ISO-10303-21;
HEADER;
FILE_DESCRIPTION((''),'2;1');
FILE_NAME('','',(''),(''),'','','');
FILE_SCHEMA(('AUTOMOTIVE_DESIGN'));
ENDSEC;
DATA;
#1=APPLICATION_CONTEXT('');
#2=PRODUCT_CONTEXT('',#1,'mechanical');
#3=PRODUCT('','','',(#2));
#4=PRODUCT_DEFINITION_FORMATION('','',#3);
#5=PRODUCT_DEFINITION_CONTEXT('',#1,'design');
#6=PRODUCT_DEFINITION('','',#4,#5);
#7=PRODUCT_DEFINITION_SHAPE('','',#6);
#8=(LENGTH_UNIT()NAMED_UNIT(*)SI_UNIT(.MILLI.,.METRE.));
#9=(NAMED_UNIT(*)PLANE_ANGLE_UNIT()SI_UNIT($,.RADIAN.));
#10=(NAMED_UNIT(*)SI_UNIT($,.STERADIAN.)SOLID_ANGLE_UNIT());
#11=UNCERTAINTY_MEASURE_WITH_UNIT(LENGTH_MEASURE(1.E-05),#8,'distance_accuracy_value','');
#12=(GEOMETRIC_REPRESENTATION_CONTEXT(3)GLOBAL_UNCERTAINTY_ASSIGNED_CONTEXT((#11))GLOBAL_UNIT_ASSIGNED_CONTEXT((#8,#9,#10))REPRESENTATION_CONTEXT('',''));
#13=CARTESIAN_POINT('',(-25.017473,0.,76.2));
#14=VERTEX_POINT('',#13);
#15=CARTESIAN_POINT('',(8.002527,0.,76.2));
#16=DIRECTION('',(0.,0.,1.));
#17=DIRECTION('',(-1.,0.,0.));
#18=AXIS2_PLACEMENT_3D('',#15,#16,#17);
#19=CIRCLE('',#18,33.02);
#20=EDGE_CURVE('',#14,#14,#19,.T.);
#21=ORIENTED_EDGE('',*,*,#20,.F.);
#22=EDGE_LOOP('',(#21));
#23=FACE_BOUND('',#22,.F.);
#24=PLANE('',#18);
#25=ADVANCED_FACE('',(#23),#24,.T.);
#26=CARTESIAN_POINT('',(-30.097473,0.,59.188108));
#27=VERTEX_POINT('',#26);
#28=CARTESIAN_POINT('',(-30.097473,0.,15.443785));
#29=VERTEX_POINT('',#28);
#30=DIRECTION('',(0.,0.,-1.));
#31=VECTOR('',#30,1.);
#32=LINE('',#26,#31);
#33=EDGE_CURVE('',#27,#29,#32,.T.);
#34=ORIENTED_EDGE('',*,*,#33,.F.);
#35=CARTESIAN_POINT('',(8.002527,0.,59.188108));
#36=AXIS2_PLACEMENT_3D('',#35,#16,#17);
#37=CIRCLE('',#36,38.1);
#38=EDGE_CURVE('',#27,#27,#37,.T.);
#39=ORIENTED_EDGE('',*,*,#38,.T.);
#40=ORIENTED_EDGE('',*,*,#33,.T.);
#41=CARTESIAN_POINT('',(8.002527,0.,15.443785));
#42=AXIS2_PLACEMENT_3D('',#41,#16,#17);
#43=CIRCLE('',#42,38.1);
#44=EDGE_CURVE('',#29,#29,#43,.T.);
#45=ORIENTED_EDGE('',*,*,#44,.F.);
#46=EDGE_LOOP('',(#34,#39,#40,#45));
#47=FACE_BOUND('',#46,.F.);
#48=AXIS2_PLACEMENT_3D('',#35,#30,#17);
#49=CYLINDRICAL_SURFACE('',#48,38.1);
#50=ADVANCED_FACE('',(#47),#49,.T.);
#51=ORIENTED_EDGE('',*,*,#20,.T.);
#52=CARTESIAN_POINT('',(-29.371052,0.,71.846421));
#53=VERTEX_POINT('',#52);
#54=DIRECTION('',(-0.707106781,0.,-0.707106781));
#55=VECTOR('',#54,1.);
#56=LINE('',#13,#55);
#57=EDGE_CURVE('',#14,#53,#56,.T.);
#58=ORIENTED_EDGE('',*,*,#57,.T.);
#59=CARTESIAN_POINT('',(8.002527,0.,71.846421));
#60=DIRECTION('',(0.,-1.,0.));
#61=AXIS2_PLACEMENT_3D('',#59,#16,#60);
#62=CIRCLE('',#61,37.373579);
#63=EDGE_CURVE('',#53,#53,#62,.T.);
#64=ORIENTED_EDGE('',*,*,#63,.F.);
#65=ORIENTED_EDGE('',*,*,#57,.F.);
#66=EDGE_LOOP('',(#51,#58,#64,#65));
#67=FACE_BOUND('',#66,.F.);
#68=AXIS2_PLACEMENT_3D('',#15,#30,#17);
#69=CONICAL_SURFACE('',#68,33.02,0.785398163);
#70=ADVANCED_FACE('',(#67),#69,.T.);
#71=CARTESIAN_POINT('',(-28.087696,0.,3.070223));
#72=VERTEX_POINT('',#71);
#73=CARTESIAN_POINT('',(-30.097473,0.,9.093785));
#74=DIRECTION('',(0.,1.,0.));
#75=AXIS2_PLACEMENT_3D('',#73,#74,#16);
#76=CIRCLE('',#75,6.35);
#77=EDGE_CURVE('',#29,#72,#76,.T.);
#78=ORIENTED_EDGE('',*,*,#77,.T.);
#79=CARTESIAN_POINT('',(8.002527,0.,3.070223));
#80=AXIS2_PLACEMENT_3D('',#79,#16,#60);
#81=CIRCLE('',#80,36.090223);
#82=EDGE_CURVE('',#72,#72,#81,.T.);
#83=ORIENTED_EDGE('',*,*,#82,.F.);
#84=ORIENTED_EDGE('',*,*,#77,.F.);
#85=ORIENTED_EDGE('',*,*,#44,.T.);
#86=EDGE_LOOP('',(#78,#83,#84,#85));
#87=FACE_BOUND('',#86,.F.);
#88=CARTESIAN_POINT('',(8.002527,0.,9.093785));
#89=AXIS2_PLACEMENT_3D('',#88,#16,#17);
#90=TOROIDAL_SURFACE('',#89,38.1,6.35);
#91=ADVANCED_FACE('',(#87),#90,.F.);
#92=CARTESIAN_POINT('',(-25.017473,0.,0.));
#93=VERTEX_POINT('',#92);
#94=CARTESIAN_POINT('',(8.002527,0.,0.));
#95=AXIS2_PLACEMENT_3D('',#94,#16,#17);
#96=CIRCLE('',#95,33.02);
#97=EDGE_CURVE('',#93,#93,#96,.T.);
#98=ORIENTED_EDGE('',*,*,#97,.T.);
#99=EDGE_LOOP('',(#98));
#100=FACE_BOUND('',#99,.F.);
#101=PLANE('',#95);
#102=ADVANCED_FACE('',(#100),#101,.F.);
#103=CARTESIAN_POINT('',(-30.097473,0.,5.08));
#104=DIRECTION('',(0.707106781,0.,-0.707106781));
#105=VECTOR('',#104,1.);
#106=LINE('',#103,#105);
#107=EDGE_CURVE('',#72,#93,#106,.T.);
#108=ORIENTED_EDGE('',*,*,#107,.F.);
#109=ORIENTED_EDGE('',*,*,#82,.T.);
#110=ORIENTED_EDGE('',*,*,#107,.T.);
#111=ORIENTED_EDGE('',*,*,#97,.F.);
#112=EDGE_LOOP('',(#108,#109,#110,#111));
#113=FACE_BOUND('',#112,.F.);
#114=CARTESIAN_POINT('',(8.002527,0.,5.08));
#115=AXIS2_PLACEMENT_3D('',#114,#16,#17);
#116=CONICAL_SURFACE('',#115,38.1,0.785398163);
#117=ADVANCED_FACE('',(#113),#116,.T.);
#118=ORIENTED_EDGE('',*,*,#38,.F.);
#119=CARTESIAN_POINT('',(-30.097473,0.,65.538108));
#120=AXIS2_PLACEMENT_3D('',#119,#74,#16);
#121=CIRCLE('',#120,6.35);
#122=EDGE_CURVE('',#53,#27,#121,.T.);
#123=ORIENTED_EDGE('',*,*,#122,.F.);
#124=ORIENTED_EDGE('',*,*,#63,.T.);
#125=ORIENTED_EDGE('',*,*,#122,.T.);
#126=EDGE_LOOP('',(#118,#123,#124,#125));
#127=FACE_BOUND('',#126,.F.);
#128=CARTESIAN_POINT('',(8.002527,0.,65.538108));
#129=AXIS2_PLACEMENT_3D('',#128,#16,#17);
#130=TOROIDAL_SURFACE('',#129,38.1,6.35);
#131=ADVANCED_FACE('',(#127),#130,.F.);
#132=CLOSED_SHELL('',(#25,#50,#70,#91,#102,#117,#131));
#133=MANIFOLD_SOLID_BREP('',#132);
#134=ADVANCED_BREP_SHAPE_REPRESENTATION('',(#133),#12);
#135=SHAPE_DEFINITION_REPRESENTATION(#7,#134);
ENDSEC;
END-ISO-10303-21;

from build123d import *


# Not quite as in the source:
# - a fillet or chamfer that OpenCascade refuses, or shapes differently, is made with other operations: its cross-section is extruded or revolved along the edge and cut away or added


with BuildPart() as f2:
    # F0 (on Front) → F2 (revolve)
    with BuildSketch(Plane.XZ):
        with BuildLine():
            Line((-30.0974734128, 0), (8.0025265872, 0))
            Line((8.0025265872, 0), (8.0025265872, 76.2))
            Line((8.0025265872, 76.2), (-30.0974734128, 76.2))
            Line((-30.0974734128, 76.2), (-30.0974734128, 71.8881083488))
            ThreePointArc((-30.0974734128, 71.8881083488), (-23.7474734128, 65.5381083488), (-30.0974734128, 59.1881083488))
            Line((-30.0974734128, 59.1881083488), (-30.0974734128, 15.4437847272))
            ThreePointArc((-30.0974734128, 15.4437847272), (-23.7474734128, 9.0937847272), (-30.0974734128, 2.7437847272))
            Line((-30.0974734128, 2.7437847272), (-30.0974734128, 0))
        make_face()
    revolve(axis=Axis((8.0025265872, 0, 38.1), (0, 0, 1)))

    # F3: chamfer of 5.08 on 2 edges, made by hand

    # F3_s1 → F3_t2 (revolve, cut)
    with BuildSketch(Plane.XZ):
        Polygon((-25.0174734128, 76.2), (-30.0974734128, 71.12), (-30.0974734128, 76.2), align=None)
    revolve(axis=Axis((8.0025265872, 0, 76.2), (0, 0, 1)), mode=Mode.SUBTRACT)

    # F3_s3 → F3_t4 (revolve, cut)
    with BuildSketch(Plane.XZ):
        Polygon((-30.0974734128, 5.08), (-25.0174734128, 0), (-30.0974734128, 0), align=None)
    revolve(axis=Axis((8.0025265872, 0, 0), (0, 0, 1)), mode=Mode.SUBTRACT)


solid = f2.part
